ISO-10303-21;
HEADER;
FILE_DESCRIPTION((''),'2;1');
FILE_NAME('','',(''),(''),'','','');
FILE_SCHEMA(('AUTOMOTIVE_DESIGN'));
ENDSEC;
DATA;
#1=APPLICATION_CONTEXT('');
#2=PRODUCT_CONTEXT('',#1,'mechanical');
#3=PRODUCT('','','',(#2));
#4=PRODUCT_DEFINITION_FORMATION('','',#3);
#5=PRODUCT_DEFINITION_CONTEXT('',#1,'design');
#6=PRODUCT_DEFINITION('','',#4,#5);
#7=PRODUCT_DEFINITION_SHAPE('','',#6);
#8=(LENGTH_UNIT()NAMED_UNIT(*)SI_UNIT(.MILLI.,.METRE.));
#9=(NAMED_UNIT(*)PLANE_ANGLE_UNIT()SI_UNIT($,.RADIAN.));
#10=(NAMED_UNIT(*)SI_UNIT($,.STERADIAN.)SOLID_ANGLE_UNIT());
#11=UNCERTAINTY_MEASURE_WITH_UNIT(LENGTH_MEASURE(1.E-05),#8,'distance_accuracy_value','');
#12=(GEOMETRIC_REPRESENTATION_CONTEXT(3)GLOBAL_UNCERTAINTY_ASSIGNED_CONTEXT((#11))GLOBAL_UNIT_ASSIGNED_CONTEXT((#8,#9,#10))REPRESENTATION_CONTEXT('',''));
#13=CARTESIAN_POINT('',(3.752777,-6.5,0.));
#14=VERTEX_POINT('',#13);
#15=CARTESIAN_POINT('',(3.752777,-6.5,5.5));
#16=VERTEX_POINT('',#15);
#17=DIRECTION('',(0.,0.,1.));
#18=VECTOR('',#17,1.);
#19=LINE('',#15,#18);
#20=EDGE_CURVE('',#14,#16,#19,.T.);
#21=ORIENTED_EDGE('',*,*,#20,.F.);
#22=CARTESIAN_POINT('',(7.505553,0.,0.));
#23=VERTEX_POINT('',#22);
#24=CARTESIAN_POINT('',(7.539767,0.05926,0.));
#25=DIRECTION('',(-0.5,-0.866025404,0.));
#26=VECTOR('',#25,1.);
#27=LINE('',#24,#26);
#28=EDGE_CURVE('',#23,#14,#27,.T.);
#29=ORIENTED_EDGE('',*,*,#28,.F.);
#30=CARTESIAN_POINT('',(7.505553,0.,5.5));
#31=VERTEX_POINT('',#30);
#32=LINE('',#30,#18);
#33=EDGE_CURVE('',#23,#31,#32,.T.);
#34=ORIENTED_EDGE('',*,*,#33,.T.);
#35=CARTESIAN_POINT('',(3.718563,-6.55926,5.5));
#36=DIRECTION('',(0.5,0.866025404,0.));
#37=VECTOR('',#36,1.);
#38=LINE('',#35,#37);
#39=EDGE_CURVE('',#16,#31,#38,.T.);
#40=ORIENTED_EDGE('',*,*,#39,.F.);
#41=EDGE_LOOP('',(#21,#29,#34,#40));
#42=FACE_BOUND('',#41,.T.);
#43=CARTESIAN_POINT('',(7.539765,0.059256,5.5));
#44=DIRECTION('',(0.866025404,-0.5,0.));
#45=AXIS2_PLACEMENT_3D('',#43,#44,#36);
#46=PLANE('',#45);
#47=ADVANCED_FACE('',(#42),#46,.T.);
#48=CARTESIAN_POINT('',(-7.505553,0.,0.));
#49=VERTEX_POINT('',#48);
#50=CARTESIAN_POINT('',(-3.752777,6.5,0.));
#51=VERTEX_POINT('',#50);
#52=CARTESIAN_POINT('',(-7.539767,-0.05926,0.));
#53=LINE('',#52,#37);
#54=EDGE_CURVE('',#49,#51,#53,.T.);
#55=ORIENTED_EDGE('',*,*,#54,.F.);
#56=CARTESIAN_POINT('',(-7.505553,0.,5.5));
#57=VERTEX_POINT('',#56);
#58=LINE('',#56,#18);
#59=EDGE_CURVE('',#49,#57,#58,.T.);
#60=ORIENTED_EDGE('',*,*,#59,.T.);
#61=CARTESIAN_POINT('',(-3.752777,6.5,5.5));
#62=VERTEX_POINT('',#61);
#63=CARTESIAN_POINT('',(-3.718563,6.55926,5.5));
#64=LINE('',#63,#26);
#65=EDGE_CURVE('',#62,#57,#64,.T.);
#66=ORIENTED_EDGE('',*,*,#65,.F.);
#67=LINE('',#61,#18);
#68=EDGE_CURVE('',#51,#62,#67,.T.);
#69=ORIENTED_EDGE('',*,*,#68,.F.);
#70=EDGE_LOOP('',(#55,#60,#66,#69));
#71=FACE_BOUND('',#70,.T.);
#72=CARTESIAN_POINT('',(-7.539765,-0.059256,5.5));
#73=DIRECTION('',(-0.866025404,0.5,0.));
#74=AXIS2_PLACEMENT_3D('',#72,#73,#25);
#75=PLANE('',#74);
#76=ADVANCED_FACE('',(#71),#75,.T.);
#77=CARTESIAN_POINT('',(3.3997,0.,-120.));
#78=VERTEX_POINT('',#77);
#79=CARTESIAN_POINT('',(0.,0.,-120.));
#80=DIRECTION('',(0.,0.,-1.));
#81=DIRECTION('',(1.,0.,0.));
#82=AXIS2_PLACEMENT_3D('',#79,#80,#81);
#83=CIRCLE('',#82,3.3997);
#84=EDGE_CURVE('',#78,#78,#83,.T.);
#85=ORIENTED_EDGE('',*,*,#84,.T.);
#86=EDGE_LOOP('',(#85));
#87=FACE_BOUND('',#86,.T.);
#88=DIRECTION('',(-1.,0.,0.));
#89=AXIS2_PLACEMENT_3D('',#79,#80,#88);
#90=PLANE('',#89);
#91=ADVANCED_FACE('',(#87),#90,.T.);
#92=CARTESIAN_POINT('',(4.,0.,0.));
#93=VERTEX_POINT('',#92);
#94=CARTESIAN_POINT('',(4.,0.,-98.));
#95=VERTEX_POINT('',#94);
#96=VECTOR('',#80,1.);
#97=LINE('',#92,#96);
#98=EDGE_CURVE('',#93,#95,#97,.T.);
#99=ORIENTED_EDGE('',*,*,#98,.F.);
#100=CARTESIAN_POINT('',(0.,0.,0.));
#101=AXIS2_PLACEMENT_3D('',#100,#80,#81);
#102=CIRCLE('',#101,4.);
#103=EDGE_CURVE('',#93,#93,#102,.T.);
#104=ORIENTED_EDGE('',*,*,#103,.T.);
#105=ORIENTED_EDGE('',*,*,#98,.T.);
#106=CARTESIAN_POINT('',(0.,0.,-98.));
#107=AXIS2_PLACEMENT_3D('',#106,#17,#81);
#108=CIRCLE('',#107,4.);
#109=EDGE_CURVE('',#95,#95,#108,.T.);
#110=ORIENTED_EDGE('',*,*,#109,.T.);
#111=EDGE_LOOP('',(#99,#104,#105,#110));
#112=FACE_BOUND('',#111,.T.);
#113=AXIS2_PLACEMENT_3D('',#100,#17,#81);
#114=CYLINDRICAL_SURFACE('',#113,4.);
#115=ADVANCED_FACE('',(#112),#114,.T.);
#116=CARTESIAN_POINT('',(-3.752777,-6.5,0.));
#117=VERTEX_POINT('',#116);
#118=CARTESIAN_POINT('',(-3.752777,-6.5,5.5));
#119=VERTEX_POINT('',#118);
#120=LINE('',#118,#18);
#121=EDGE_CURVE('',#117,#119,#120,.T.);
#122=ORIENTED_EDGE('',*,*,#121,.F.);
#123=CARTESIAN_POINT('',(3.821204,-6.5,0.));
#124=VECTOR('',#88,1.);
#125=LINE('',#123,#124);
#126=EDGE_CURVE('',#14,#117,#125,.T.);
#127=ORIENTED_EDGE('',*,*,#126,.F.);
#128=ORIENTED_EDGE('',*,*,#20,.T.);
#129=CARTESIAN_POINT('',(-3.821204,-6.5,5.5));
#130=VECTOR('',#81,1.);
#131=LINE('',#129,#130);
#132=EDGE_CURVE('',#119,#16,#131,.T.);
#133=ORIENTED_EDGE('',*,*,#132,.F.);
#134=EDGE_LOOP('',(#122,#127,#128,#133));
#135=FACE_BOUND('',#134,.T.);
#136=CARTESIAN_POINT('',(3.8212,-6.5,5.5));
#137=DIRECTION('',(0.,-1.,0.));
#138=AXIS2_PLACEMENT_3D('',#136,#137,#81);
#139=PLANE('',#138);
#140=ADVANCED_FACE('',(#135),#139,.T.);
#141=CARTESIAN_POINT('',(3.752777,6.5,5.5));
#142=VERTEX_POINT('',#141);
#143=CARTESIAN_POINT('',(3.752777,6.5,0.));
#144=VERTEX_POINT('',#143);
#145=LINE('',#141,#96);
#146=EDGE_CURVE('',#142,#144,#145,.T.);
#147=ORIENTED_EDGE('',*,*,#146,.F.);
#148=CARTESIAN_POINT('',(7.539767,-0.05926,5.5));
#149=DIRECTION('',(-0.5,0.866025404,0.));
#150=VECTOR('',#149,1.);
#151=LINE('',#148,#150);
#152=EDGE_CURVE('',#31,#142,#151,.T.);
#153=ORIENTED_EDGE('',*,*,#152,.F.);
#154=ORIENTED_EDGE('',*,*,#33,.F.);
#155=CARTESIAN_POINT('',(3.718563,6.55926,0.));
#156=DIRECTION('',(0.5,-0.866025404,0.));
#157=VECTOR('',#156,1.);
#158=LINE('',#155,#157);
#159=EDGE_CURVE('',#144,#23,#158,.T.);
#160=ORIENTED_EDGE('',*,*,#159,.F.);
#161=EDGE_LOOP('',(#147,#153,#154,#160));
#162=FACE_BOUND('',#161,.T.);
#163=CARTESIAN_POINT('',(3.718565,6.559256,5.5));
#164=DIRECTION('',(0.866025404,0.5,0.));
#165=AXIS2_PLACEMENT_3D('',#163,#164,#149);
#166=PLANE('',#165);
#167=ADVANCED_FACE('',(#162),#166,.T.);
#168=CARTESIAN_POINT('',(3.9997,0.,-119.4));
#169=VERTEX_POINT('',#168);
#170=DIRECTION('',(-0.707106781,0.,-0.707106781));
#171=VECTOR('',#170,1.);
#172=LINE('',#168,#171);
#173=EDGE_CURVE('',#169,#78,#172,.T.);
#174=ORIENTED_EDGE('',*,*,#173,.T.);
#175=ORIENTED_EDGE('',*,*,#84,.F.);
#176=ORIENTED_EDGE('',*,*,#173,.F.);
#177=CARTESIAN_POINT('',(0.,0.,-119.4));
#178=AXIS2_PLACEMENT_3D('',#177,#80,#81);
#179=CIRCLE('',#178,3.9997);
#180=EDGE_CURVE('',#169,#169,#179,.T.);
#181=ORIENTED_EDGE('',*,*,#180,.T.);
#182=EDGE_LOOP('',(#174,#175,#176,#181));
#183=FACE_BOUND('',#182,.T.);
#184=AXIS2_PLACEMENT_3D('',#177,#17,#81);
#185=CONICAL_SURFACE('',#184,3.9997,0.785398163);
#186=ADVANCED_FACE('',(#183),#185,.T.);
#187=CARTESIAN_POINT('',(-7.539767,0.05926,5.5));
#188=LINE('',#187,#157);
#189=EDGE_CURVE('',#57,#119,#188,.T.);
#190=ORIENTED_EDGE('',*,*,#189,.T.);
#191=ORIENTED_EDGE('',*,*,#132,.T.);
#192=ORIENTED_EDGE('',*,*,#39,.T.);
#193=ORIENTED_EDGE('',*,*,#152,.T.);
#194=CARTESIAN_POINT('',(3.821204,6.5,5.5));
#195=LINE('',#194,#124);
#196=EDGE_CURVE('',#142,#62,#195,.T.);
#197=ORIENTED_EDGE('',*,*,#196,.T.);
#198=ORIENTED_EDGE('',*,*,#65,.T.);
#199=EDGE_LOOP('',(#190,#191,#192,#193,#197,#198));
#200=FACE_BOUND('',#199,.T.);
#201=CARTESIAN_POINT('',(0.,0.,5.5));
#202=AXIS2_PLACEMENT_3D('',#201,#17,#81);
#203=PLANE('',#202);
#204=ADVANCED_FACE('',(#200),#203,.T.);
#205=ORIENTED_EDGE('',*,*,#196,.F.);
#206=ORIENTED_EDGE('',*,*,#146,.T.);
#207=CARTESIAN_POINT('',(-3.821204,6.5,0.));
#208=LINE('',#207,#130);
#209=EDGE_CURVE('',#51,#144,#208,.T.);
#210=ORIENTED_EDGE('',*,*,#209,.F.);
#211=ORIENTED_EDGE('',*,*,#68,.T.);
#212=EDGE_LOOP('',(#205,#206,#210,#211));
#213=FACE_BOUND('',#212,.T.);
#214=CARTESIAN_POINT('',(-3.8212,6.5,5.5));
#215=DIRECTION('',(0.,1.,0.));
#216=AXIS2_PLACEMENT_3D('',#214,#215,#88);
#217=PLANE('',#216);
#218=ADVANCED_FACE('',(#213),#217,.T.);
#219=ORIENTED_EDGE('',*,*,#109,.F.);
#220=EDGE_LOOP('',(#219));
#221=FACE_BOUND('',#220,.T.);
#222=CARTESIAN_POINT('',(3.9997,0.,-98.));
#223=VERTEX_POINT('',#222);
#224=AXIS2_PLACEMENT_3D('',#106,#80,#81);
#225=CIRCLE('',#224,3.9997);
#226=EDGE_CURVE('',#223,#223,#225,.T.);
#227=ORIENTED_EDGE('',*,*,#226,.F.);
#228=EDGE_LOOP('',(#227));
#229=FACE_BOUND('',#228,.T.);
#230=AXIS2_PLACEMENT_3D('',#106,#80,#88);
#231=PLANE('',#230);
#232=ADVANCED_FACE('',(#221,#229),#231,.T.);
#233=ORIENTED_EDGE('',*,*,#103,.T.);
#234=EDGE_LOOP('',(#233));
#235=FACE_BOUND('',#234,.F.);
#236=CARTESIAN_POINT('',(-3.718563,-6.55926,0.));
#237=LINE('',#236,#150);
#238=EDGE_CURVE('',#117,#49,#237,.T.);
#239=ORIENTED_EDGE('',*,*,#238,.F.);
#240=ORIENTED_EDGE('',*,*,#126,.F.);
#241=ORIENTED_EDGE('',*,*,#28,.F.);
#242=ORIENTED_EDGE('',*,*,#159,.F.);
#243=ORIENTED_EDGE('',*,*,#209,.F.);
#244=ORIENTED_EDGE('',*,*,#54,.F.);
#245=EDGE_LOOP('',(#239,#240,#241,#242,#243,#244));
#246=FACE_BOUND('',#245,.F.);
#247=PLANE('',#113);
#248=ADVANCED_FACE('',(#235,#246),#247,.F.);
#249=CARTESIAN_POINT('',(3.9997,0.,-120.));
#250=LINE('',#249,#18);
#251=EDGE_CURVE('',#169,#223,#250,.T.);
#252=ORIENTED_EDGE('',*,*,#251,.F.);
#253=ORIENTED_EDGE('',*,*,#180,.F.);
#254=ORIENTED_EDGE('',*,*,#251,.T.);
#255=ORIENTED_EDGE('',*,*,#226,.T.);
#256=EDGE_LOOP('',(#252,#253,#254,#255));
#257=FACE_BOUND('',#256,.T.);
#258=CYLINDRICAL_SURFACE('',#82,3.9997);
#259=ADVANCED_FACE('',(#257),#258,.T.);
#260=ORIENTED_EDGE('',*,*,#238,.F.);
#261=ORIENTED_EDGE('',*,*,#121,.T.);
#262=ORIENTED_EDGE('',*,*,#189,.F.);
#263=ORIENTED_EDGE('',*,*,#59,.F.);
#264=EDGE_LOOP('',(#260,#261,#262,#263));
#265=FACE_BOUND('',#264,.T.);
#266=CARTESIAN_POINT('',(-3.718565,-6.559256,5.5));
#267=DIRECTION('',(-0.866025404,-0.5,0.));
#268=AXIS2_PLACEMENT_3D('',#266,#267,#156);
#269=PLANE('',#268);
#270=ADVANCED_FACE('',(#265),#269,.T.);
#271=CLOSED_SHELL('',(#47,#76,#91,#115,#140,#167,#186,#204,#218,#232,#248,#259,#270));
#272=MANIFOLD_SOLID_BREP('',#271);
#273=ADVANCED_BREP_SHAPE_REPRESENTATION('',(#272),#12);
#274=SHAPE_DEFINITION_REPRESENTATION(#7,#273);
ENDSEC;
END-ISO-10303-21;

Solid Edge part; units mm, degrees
sketch "Sketch1" plane through (0, 0, 0) normal (0, 0, 1) x (1, 0, 0)
  circle A0 centre (0, 0) radius 7.54
  dimension "D1" = 15.08
extrude "Protrusion1" add sketch "Sketch1" along normal blind 5.5
sketch "Sketch2" plane through (0, 0, 0) normal (0, 0, -1) x (1, 0, 0)
  circle A0 centre (0, 0) radius 4
extrude "Protrusion2" add sketch "Sketch2" along normal blind 120
sketch "Sketch3" plane through (0, 0, -120) normal (0, 0, -1) x (1, 0, 0)
  circle A0 centre (0, 0) radius 3.9997
extrude "Cutout1" cut sketch "Sketch3" against normal blind 22 flip side to cut
chamfer "Chamfer_1" distance 0.6 angle 45 1 edges at (-3.9997, 0, -120)
sketch "Sketch4" plane through (0, 0, 5.5) normal (0, 0, 1) x (1, 0, 0)
  line L0 (-3.8212, 6.5) -> (3.8212, 6.5)
  dimension "D1" = 13
extrude "Cutout2" cut sketch "Sketch4" against normal up to next material side at (0, 6.55, 5.5)
pattern_circular "Pattern1" count 6 over 360 about axis through (0, 0, 5.5) along (0, 0, 1) of "Cutout2"
properties part number "116364"
